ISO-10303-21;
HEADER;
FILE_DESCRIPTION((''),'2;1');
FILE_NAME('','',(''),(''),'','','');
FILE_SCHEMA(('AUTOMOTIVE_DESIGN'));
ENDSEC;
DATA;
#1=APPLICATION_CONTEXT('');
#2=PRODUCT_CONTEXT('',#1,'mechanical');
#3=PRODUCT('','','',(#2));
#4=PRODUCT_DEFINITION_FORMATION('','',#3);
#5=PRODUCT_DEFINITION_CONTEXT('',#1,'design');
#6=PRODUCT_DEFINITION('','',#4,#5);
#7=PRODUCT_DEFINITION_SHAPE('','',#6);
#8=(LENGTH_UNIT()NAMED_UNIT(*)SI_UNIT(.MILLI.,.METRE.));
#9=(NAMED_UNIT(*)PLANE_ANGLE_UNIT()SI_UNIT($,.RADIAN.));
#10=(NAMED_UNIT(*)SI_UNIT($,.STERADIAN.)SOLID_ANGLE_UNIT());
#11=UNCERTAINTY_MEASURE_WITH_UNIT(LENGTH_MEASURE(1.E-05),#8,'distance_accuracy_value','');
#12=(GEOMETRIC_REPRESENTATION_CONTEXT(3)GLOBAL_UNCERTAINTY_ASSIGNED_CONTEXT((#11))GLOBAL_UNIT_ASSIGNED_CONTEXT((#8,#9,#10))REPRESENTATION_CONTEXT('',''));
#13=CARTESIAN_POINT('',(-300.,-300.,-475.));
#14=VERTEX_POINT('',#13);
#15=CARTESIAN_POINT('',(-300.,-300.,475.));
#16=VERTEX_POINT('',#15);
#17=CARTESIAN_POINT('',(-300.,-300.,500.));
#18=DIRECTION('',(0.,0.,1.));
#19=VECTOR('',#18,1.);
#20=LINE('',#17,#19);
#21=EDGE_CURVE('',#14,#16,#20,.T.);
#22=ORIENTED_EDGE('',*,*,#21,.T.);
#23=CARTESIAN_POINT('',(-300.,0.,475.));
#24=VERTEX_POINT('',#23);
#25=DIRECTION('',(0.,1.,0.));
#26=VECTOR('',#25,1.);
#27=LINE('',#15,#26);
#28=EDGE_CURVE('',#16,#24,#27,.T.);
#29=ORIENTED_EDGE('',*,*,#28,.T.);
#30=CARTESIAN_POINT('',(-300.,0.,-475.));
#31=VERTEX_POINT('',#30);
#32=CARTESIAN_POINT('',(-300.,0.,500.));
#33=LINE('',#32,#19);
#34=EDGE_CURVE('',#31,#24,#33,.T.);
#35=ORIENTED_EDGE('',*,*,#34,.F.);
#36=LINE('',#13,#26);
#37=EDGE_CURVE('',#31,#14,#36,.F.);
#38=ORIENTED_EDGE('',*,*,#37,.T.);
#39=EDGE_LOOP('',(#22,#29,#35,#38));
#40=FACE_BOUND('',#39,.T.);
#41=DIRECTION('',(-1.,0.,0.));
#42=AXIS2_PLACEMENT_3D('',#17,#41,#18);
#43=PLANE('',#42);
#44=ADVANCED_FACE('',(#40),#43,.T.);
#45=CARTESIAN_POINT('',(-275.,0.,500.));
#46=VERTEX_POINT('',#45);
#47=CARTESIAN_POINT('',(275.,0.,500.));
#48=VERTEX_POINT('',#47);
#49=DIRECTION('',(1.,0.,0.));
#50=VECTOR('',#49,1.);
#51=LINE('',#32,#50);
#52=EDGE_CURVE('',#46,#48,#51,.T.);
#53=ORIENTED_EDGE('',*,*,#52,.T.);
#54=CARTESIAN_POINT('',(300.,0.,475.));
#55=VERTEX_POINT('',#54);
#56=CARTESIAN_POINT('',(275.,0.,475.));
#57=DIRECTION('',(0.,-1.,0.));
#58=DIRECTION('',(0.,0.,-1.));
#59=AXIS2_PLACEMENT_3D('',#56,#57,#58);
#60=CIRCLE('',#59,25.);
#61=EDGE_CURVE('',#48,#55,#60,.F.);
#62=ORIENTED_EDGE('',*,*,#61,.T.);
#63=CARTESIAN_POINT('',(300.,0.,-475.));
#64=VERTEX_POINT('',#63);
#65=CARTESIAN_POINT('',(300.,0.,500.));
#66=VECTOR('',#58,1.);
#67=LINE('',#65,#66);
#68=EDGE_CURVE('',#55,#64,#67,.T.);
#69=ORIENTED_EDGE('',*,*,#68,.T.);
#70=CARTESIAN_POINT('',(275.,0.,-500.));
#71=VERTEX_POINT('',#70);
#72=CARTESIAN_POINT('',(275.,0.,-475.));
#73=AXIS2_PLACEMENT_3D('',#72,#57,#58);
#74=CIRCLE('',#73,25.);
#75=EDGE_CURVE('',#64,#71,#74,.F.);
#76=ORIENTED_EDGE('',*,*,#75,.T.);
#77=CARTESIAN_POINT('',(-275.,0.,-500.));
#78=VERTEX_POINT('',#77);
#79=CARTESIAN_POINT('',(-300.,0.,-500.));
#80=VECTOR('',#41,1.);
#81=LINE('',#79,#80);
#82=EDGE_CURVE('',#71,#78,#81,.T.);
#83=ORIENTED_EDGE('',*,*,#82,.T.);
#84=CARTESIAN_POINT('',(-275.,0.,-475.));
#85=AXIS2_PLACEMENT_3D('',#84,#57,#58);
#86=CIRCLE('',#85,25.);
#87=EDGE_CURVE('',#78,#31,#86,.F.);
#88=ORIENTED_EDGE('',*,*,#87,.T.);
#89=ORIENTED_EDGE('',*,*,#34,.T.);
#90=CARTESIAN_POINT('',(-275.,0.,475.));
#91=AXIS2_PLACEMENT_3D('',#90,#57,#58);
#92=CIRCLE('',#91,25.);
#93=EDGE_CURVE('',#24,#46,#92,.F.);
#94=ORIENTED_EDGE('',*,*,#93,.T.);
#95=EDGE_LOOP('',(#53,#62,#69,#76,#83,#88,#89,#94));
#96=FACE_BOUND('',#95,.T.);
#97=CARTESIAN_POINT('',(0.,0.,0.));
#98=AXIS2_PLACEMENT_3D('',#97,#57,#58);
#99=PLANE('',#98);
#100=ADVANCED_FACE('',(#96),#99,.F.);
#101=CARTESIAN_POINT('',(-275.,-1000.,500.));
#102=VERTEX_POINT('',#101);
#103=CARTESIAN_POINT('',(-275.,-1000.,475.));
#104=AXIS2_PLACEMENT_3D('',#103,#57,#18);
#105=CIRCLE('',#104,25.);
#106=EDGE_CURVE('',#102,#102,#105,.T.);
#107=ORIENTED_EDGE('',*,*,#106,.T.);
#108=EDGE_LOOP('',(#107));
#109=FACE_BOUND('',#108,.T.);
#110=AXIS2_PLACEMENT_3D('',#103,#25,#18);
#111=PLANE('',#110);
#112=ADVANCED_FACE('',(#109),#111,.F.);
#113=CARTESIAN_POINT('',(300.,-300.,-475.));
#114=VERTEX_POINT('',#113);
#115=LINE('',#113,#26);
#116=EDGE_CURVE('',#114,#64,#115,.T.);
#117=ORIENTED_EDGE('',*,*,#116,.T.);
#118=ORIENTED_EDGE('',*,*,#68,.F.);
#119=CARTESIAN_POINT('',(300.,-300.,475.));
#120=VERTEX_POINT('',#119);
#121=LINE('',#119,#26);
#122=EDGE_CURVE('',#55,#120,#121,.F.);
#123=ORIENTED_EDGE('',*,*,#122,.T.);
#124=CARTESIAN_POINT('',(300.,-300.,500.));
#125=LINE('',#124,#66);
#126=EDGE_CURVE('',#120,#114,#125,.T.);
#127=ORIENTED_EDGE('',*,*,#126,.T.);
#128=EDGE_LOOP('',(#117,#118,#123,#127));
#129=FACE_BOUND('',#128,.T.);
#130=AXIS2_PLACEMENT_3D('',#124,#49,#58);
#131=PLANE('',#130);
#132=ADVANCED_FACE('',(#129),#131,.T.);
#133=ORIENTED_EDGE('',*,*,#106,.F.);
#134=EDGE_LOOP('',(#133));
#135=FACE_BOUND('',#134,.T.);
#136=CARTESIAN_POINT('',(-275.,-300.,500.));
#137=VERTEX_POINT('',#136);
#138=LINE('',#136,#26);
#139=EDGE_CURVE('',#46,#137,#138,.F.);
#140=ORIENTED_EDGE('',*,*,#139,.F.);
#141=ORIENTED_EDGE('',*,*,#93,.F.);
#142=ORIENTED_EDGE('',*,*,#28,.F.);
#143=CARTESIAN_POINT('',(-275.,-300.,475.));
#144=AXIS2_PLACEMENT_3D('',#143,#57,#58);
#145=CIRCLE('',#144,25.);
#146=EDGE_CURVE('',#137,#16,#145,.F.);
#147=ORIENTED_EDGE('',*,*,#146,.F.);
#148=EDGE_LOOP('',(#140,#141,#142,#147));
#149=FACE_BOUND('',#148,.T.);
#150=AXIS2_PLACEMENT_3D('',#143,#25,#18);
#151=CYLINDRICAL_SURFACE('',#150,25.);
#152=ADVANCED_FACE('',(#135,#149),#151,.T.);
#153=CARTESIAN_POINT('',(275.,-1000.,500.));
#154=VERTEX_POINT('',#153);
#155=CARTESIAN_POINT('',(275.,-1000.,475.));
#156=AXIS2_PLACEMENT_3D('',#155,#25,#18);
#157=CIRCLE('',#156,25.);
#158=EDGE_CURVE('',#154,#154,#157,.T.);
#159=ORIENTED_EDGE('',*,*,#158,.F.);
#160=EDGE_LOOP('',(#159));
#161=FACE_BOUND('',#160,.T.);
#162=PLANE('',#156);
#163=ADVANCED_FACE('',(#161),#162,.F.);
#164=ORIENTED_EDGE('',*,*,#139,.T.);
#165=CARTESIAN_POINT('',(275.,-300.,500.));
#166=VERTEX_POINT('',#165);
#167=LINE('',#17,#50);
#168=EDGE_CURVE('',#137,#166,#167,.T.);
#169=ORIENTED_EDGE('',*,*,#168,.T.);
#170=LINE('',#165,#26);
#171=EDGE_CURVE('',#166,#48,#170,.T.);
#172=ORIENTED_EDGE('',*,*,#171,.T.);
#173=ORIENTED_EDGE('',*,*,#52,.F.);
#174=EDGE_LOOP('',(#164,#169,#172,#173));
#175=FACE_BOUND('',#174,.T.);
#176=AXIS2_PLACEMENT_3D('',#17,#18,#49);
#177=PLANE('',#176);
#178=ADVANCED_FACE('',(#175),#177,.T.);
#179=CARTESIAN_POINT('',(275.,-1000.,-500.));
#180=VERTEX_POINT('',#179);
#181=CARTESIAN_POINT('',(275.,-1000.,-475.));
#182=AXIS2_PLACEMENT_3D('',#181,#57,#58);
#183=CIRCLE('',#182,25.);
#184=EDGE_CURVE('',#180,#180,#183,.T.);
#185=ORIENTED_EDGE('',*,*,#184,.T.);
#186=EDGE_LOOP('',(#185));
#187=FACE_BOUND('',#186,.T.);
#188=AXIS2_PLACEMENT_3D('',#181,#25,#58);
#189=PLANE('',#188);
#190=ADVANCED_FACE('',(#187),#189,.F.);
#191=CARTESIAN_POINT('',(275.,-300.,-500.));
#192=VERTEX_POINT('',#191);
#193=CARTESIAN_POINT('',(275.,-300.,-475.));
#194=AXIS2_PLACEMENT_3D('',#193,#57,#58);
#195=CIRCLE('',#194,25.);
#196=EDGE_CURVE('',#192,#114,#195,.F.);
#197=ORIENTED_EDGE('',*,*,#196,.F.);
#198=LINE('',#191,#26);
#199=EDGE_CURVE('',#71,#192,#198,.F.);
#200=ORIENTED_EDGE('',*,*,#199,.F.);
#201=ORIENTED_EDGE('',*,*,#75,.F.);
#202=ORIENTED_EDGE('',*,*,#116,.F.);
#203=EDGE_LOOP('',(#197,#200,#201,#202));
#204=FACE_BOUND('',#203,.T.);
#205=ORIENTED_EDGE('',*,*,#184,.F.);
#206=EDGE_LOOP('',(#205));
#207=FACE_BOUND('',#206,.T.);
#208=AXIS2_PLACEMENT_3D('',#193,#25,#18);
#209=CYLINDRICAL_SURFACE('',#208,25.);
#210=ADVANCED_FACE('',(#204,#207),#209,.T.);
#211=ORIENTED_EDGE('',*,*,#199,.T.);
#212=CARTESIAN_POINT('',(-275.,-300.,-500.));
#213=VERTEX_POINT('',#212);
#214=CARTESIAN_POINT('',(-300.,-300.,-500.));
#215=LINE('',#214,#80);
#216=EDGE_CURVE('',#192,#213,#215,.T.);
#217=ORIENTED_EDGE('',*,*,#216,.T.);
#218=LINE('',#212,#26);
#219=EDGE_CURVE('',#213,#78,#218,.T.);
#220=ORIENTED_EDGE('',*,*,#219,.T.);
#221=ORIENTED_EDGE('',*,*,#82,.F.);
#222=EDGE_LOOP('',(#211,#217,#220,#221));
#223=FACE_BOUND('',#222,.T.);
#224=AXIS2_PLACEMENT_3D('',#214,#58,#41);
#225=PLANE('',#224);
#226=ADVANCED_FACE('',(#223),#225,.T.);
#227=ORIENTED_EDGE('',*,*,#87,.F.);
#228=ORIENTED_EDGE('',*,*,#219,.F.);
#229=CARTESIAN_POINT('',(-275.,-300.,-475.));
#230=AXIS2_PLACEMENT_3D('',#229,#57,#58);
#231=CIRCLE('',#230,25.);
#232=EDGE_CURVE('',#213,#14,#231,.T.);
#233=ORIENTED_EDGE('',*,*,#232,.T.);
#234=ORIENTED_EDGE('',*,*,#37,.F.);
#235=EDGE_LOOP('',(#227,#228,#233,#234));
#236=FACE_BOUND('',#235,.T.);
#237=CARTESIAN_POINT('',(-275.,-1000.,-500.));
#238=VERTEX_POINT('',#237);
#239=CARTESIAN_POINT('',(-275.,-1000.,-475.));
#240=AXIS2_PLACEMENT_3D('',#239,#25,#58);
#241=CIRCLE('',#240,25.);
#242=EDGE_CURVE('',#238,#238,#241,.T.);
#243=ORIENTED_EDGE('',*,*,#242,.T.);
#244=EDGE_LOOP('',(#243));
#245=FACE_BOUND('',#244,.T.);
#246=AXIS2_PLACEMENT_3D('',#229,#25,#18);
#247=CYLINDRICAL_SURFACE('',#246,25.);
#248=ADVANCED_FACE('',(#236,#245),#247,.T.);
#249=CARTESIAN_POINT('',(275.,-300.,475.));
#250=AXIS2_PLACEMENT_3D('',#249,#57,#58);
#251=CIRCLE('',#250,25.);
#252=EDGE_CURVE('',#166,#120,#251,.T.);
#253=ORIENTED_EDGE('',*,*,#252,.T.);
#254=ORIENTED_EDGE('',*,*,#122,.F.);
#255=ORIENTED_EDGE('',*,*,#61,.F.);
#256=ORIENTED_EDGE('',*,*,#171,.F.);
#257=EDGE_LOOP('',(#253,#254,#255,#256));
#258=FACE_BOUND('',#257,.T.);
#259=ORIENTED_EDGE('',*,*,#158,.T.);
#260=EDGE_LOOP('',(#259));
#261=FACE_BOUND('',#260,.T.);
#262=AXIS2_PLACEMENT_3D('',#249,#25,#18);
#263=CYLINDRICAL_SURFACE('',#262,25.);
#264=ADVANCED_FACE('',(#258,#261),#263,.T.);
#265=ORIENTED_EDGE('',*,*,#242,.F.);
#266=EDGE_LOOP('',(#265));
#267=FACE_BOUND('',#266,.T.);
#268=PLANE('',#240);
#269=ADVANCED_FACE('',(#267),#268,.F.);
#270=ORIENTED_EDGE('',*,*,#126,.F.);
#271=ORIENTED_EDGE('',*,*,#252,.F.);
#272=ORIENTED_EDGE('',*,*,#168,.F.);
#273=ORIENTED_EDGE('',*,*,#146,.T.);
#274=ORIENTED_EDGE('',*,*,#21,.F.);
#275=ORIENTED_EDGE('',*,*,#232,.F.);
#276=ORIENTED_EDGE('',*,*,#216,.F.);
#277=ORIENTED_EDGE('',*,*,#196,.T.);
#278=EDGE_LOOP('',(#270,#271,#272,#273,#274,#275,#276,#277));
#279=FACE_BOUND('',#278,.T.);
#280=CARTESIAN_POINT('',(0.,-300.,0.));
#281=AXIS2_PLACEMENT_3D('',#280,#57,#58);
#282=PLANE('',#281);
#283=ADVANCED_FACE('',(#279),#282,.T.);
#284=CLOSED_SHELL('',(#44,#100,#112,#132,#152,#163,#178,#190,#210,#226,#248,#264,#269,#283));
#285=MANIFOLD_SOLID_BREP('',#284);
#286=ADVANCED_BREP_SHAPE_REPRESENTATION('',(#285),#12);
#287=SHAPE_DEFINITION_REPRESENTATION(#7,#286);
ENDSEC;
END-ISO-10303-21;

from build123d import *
from build123d.topology import SkipClean

# Parameters (mm, degrees)
SKETCH_2_W               = 600
SKETCH_2_H               = 1000
EXTRUDE_1_DEPTH          = 300
FILLET_1_R               = 25
EXTRUDE_START            = -1000
SKETCH_3_R               = 25
EXTRUDE_2_DEPTH          = 1000
MIRROR_START             = -1000
MIRROR_2_COPY_1_SKETCH_R = 25
MIRROR_2_COPY_1_DEPTH    = 1000


with BuildPart() as part:
    # 草图2 → 凸台-拉伸1 (new body)
    with BuildSketch(Plane(origin=(0, 0, 0), x_dir=(1, 0, 0), z_dir=(0, 1, 0))):
        Rectangle(SKETCH_2_W, SKETCH_2_H)
    extrude(amount=-EXTRUDE_1_DEPTH)

    # 圆角1
    fillet_1_edges = [part.edges().sort_by_distance(p)[0] for p in [
        (-300, -150, -500),
        (300, -150, -500),
        (-300, -150, 500),
        (300, -150, 500),
    ]]
    fillet(fillet_1_edges, radius=FILLET_1_R)

    # 草图3 → 凸台-拉伸2 (add)
    with SkipClean():  # the faces are left unmerged after this step: merging them gives an invalid solid
        with BuildSketch(Plane(origin=(0, 0, 0), x_dir=(1, 0, 0), z_dir=(0, 1, 0)).offset(EXTRUDE_START)):
            with Locations((275, -475)):
                Circle(SKETCH_3_R)
        extrude_2 = extrude(amount=EXTRUDE_2_DEPTH)

    # 镜向1: 凸台-拉伸2 across plane
    with SkipClean():  # the faces are left unmerged after this step: merging them gives an invalid solid
        add(extrude_2.mirror(Plane(origin=(0, 0, 0), x_dir=(0, 0, 1), z_dir=(1, 0, 0))))

    # 镜向2: 凸台-拉伸2 across plane
    with SkipClean():  # the faces are left unmerged after this step: merging them gives an invalid solid
        add(extrude_2.mirror(Plane.XY))

    # 镜向2 copy 1 sketch → 镜向2 copy 1 (add)
    with SkipClean():  # the faces are left unmerged after this step: merging them gives an invalid solid
        with BuildSketch(Plane(origin=(0, 0, 0), x_dir=(-1, 0, 0), z_dir=(0, 1, 0)).offset(MIRROR_START)):
            with Locations((275, -475)):
                Circle(MIRROR_2_COPY_1_SKETCH_R)
        extrude(amount=MIRROR_2_COPY_1_DEPTH)


solid = part.part
